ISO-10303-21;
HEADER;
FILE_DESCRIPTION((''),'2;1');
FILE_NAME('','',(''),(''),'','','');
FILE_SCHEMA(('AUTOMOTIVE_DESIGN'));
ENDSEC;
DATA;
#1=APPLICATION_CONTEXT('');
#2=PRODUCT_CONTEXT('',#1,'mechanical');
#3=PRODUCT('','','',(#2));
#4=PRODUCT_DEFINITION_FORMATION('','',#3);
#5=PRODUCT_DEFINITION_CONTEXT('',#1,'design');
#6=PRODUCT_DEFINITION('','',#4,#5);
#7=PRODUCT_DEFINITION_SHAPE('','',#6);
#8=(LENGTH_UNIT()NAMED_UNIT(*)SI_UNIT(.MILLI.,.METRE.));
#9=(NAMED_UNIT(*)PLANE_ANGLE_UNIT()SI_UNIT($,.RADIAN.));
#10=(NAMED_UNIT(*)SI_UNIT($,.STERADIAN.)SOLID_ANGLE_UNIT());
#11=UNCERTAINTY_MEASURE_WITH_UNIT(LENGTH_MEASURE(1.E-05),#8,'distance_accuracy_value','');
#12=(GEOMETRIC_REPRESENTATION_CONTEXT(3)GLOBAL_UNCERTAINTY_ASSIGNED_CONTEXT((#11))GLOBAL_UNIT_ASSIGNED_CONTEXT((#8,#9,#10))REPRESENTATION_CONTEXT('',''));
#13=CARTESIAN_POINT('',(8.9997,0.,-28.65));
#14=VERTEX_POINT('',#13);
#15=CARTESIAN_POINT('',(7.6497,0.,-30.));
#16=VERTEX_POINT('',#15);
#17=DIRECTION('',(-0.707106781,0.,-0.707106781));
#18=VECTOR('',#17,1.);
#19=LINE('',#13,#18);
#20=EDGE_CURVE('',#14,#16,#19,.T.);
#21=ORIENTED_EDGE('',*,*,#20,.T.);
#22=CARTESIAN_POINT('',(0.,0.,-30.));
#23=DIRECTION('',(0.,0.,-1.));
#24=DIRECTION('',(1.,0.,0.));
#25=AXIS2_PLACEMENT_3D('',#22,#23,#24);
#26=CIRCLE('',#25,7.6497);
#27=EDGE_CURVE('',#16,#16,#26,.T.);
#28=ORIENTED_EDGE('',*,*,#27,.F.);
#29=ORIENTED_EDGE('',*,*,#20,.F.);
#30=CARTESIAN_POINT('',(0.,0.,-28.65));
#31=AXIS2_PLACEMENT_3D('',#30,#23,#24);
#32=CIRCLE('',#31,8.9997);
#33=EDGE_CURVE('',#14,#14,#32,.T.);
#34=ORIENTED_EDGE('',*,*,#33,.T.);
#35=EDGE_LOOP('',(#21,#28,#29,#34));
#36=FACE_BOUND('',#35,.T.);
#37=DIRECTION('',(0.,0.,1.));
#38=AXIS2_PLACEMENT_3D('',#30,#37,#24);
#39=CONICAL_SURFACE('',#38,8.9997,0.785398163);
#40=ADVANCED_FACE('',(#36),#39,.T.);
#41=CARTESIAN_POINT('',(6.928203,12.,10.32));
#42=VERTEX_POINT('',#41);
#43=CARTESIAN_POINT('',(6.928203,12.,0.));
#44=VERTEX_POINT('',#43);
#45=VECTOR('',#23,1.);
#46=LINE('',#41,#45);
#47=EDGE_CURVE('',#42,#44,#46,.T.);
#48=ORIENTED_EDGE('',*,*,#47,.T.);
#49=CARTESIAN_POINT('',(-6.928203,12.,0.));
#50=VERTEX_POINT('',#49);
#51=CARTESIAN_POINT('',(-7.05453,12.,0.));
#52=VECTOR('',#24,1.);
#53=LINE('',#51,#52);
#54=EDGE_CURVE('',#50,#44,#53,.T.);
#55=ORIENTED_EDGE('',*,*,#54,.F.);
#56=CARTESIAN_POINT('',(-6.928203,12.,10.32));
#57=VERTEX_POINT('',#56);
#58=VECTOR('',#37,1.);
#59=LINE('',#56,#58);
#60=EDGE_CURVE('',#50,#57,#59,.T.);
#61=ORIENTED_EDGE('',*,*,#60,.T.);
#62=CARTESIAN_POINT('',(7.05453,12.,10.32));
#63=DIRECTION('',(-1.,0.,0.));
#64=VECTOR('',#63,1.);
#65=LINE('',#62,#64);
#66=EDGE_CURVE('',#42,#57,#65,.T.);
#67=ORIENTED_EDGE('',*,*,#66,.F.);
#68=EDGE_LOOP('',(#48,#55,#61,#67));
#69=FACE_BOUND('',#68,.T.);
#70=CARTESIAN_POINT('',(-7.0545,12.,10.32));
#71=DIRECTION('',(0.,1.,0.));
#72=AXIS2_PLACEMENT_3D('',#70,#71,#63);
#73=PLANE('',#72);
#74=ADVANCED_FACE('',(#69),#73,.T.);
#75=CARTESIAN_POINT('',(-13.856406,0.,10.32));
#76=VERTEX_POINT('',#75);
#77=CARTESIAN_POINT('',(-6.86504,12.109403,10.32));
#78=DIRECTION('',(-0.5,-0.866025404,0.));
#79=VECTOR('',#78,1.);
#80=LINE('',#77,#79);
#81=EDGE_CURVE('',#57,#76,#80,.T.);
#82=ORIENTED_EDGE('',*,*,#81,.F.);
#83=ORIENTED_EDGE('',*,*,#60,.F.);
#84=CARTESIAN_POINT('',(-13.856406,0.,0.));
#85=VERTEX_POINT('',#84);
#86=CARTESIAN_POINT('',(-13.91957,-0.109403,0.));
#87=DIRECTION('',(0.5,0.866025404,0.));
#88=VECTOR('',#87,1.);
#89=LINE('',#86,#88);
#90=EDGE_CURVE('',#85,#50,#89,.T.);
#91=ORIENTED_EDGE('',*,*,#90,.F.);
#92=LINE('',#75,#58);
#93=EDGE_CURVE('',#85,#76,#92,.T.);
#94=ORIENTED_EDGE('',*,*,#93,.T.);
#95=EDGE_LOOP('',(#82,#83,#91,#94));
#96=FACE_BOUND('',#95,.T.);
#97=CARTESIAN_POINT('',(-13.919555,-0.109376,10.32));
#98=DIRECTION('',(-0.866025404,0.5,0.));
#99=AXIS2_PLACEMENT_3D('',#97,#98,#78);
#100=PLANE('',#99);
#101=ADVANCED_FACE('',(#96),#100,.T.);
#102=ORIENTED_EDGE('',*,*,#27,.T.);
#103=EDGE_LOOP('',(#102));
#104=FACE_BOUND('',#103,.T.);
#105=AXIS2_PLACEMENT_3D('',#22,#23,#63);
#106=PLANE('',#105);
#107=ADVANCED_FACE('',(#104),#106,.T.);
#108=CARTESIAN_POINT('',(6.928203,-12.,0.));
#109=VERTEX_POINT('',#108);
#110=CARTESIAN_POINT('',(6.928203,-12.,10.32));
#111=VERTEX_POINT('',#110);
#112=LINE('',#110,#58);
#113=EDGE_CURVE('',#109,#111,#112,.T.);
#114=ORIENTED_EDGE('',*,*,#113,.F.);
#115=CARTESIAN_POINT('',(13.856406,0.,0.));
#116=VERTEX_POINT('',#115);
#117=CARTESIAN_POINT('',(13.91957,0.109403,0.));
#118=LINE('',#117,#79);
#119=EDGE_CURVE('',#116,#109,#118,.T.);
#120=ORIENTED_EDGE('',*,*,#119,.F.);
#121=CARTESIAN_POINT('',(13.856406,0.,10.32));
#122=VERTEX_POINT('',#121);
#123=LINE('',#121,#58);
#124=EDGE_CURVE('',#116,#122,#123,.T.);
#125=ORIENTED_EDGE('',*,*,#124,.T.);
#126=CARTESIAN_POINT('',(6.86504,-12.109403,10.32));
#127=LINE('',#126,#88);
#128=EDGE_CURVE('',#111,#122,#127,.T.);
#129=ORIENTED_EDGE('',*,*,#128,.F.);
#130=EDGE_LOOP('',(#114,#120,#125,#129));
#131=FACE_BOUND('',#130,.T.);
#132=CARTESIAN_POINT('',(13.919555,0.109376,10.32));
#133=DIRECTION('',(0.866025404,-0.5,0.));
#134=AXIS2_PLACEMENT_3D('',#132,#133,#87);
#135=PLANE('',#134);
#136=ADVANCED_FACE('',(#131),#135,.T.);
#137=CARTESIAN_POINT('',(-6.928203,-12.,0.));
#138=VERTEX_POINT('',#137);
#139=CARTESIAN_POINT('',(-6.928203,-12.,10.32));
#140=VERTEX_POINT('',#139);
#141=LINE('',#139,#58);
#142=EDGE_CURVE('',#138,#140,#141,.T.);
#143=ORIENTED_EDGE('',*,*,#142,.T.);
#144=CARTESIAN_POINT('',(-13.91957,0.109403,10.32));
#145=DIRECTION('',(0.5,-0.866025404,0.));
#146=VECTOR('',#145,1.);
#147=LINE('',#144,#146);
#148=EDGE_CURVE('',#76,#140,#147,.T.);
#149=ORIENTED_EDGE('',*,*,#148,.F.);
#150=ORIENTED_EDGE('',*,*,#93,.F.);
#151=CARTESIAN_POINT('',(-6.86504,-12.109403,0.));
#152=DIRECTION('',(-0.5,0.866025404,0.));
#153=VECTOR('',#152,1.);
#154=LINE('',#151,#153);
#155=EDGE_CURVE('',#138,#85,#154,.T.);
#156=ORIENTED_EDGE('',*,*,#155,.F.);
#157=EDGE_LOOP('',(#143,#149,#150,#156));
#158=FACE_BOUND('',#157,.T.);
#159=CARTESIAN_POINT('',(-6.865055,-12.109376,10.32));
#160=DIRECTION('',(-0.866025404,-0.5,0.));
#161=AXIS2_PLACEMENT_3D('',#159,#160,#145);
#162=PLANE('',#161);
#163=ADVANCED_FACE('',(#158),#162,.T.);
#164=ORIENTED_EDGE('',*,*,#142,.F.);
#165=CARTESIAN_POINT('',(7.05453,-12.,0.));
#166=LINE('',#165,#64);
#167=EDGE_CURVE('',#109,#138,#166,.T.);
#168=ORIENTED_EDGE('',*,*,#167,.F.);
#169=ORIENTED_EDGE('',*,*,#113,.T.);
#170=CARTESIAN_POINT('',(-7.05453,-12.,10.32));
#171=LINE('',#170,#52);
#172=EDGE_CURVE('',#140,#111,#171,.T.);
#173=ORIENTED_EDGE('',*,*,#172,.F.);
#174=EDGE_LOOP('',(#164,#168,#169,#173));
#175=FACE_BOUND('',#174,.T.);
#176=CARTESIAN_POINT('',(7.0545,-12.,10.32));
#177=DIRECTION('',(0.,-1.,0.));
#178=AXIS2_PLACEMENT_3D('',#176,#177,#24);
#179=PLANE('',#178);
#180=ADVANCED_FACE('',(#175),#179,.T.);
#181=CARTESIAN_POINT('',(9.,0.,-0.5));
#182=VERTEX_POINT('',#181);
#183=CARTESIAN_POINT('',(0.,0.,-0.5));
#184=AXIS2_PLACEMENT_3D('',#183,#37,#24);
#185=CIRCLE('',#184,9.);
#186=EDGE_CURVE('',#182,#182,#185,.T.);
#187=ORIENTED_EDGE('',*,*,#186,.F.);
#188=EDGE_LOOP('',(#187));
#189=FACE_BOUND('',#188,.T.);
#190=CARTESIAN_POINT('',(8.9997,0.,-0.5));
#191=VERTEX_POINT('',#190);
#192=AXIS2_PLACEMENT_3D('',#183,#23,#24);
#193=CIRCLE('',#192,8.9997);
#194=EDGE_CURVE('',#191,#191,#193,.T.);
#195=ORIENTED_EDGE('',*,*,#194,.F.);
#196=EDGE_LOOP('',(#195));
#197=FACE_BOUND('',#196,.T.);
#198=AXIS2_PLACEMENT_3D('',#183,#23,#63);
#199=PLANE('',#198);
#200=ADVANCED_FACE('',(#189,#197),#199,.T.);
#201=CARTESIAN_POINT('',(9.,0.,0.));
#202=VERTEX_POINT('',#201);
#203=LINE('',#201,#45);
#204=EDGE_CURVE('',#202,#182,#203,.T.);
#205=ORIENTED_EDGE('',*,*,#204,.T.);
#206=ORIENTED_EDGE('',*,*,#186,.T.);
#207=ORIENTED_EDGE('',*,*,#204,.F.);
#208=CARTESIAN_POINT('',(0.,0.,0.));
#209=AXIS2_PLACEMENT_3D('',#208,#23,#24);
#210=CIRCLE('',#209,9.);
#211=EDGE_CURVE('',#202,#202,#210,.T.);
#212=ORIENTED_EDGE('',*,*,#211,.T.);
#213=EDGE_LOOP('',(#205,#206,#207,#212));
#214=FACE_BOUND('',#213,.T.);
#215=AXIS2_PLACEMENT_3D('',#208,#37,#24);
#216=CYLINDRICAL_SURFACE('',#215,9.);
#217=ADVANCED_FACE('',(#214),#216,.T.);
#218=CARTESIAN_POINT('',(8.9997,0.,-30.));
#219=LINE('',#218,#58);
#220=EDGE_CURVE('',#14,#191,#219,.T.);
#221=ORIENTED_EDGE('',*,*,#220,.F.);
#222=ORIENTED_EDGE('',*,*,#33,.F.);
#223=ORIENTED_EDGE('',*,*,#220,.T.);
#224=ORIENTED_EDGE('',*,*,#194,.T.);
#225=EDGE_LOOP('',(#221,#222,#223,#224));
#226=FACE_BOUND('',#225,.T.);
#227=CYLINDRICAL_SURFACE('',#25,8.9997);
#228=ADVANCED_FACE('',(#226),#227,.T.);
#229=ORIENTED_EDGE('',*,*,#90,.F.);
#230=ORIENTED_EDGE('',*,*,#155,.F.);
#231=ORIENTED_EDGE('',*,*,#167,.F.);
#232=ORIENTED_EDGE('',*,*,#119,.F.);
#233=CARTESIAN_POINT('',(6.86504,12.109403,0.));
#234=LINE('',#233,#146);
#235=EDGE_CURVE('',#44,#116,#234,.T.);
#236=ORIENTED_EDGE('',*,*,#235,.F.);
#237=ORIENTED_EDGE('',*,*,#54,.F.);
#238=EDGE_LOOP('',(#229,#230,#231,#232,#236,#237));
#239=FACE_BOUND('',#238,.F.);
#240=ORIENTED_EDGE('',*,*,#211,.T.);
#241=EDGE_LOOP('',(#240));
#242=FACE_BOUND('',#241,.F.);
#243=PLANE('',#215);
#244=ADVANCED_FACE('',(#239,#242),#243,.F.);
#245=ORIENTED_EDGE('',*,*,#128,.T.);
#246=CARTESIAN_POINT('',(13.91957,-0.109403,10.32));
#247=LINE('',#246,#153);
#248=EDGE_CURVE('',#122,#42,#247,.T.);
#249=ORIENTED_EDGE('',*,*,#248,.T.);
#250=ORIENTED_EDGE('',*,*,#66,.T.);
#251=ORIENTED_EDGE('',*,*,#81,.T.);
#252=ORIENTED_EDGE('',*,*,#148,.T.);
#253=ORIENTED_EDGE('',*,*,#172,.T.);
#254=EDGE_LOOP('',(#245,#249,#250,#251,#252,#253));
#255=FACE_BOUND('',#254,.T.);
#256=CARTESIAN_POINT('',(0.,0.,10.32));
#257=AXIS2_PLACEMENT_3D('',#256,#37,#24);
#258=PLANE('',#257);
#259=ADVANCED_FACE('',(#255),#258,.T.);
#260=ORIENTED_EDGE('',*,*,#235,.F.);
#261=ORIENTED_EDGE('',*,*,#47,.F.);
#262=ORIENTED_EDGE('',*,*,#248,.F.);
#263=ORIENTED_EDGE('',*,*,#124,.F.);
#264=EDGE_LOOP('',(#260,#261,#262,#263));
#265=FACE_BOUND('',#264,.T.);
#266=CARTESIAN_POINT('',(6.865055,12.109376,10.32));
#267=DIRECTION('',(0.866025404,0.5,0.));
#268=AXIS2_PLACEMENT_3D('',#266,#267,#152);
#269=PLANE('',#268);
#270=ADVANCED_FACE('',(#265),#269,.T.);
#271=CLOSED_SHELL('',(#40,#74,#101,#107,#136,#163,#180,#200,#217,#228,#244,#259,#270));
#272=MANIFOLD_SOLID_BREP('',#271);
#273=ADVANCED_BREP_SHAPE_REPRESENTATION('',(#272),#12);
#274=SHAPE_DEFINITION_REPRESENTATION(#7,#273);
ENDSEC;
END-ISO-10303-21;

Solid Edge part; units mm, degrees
sketch "Sketch1" plane through (0, 0, 0) normal (0, 0, 1) x (1, 0, 0)
  circle A0 centre (0, 0) radius 13.92
  dimension "D1" = 27.84
extrude "Protrusion1" add sketch "Sketch1" along normal blind 10.32
sketch "Sketch2" plane through (0, 0, 0) normal (0, 0, -1) x (1, 0, 0)
  circle A0 centre (0, 0) radius 9
extrude "Protrusion2" add sketch "Sketch2" along normal blind 30
sketch "Sketch3" plane through (0, 0, -30) normal (0, 0, -1) x (1, 0, 0)
  circle A0 centre (0, 0) radius 8.9997
extrude "Cutout1" cut sketch "Sketch3" against normal blind 29.5 flip side to cut
chamfer "Chamfer_1" distance 1.35 angle 45 1 edges at (-8.9997, 0, -30)
sketch "Sketch4" plane through (0, 0, 10.32) normal (0, 0, 1) x (1, 0, 0)
  line L0 (-7.0545, 12) -> (7.0545, 12)
  dimension "D1" = 24
extrude "Cutout2" cut sketch "Sketch4" against normal up to next material side at (0, 12.05, 10.32)
pattern_circular "Pattern1" count 6 over 360 about axis through (0, 0, 10.32) along (0, 0, 1) of "Cutout2"
properties part number "24104654"
